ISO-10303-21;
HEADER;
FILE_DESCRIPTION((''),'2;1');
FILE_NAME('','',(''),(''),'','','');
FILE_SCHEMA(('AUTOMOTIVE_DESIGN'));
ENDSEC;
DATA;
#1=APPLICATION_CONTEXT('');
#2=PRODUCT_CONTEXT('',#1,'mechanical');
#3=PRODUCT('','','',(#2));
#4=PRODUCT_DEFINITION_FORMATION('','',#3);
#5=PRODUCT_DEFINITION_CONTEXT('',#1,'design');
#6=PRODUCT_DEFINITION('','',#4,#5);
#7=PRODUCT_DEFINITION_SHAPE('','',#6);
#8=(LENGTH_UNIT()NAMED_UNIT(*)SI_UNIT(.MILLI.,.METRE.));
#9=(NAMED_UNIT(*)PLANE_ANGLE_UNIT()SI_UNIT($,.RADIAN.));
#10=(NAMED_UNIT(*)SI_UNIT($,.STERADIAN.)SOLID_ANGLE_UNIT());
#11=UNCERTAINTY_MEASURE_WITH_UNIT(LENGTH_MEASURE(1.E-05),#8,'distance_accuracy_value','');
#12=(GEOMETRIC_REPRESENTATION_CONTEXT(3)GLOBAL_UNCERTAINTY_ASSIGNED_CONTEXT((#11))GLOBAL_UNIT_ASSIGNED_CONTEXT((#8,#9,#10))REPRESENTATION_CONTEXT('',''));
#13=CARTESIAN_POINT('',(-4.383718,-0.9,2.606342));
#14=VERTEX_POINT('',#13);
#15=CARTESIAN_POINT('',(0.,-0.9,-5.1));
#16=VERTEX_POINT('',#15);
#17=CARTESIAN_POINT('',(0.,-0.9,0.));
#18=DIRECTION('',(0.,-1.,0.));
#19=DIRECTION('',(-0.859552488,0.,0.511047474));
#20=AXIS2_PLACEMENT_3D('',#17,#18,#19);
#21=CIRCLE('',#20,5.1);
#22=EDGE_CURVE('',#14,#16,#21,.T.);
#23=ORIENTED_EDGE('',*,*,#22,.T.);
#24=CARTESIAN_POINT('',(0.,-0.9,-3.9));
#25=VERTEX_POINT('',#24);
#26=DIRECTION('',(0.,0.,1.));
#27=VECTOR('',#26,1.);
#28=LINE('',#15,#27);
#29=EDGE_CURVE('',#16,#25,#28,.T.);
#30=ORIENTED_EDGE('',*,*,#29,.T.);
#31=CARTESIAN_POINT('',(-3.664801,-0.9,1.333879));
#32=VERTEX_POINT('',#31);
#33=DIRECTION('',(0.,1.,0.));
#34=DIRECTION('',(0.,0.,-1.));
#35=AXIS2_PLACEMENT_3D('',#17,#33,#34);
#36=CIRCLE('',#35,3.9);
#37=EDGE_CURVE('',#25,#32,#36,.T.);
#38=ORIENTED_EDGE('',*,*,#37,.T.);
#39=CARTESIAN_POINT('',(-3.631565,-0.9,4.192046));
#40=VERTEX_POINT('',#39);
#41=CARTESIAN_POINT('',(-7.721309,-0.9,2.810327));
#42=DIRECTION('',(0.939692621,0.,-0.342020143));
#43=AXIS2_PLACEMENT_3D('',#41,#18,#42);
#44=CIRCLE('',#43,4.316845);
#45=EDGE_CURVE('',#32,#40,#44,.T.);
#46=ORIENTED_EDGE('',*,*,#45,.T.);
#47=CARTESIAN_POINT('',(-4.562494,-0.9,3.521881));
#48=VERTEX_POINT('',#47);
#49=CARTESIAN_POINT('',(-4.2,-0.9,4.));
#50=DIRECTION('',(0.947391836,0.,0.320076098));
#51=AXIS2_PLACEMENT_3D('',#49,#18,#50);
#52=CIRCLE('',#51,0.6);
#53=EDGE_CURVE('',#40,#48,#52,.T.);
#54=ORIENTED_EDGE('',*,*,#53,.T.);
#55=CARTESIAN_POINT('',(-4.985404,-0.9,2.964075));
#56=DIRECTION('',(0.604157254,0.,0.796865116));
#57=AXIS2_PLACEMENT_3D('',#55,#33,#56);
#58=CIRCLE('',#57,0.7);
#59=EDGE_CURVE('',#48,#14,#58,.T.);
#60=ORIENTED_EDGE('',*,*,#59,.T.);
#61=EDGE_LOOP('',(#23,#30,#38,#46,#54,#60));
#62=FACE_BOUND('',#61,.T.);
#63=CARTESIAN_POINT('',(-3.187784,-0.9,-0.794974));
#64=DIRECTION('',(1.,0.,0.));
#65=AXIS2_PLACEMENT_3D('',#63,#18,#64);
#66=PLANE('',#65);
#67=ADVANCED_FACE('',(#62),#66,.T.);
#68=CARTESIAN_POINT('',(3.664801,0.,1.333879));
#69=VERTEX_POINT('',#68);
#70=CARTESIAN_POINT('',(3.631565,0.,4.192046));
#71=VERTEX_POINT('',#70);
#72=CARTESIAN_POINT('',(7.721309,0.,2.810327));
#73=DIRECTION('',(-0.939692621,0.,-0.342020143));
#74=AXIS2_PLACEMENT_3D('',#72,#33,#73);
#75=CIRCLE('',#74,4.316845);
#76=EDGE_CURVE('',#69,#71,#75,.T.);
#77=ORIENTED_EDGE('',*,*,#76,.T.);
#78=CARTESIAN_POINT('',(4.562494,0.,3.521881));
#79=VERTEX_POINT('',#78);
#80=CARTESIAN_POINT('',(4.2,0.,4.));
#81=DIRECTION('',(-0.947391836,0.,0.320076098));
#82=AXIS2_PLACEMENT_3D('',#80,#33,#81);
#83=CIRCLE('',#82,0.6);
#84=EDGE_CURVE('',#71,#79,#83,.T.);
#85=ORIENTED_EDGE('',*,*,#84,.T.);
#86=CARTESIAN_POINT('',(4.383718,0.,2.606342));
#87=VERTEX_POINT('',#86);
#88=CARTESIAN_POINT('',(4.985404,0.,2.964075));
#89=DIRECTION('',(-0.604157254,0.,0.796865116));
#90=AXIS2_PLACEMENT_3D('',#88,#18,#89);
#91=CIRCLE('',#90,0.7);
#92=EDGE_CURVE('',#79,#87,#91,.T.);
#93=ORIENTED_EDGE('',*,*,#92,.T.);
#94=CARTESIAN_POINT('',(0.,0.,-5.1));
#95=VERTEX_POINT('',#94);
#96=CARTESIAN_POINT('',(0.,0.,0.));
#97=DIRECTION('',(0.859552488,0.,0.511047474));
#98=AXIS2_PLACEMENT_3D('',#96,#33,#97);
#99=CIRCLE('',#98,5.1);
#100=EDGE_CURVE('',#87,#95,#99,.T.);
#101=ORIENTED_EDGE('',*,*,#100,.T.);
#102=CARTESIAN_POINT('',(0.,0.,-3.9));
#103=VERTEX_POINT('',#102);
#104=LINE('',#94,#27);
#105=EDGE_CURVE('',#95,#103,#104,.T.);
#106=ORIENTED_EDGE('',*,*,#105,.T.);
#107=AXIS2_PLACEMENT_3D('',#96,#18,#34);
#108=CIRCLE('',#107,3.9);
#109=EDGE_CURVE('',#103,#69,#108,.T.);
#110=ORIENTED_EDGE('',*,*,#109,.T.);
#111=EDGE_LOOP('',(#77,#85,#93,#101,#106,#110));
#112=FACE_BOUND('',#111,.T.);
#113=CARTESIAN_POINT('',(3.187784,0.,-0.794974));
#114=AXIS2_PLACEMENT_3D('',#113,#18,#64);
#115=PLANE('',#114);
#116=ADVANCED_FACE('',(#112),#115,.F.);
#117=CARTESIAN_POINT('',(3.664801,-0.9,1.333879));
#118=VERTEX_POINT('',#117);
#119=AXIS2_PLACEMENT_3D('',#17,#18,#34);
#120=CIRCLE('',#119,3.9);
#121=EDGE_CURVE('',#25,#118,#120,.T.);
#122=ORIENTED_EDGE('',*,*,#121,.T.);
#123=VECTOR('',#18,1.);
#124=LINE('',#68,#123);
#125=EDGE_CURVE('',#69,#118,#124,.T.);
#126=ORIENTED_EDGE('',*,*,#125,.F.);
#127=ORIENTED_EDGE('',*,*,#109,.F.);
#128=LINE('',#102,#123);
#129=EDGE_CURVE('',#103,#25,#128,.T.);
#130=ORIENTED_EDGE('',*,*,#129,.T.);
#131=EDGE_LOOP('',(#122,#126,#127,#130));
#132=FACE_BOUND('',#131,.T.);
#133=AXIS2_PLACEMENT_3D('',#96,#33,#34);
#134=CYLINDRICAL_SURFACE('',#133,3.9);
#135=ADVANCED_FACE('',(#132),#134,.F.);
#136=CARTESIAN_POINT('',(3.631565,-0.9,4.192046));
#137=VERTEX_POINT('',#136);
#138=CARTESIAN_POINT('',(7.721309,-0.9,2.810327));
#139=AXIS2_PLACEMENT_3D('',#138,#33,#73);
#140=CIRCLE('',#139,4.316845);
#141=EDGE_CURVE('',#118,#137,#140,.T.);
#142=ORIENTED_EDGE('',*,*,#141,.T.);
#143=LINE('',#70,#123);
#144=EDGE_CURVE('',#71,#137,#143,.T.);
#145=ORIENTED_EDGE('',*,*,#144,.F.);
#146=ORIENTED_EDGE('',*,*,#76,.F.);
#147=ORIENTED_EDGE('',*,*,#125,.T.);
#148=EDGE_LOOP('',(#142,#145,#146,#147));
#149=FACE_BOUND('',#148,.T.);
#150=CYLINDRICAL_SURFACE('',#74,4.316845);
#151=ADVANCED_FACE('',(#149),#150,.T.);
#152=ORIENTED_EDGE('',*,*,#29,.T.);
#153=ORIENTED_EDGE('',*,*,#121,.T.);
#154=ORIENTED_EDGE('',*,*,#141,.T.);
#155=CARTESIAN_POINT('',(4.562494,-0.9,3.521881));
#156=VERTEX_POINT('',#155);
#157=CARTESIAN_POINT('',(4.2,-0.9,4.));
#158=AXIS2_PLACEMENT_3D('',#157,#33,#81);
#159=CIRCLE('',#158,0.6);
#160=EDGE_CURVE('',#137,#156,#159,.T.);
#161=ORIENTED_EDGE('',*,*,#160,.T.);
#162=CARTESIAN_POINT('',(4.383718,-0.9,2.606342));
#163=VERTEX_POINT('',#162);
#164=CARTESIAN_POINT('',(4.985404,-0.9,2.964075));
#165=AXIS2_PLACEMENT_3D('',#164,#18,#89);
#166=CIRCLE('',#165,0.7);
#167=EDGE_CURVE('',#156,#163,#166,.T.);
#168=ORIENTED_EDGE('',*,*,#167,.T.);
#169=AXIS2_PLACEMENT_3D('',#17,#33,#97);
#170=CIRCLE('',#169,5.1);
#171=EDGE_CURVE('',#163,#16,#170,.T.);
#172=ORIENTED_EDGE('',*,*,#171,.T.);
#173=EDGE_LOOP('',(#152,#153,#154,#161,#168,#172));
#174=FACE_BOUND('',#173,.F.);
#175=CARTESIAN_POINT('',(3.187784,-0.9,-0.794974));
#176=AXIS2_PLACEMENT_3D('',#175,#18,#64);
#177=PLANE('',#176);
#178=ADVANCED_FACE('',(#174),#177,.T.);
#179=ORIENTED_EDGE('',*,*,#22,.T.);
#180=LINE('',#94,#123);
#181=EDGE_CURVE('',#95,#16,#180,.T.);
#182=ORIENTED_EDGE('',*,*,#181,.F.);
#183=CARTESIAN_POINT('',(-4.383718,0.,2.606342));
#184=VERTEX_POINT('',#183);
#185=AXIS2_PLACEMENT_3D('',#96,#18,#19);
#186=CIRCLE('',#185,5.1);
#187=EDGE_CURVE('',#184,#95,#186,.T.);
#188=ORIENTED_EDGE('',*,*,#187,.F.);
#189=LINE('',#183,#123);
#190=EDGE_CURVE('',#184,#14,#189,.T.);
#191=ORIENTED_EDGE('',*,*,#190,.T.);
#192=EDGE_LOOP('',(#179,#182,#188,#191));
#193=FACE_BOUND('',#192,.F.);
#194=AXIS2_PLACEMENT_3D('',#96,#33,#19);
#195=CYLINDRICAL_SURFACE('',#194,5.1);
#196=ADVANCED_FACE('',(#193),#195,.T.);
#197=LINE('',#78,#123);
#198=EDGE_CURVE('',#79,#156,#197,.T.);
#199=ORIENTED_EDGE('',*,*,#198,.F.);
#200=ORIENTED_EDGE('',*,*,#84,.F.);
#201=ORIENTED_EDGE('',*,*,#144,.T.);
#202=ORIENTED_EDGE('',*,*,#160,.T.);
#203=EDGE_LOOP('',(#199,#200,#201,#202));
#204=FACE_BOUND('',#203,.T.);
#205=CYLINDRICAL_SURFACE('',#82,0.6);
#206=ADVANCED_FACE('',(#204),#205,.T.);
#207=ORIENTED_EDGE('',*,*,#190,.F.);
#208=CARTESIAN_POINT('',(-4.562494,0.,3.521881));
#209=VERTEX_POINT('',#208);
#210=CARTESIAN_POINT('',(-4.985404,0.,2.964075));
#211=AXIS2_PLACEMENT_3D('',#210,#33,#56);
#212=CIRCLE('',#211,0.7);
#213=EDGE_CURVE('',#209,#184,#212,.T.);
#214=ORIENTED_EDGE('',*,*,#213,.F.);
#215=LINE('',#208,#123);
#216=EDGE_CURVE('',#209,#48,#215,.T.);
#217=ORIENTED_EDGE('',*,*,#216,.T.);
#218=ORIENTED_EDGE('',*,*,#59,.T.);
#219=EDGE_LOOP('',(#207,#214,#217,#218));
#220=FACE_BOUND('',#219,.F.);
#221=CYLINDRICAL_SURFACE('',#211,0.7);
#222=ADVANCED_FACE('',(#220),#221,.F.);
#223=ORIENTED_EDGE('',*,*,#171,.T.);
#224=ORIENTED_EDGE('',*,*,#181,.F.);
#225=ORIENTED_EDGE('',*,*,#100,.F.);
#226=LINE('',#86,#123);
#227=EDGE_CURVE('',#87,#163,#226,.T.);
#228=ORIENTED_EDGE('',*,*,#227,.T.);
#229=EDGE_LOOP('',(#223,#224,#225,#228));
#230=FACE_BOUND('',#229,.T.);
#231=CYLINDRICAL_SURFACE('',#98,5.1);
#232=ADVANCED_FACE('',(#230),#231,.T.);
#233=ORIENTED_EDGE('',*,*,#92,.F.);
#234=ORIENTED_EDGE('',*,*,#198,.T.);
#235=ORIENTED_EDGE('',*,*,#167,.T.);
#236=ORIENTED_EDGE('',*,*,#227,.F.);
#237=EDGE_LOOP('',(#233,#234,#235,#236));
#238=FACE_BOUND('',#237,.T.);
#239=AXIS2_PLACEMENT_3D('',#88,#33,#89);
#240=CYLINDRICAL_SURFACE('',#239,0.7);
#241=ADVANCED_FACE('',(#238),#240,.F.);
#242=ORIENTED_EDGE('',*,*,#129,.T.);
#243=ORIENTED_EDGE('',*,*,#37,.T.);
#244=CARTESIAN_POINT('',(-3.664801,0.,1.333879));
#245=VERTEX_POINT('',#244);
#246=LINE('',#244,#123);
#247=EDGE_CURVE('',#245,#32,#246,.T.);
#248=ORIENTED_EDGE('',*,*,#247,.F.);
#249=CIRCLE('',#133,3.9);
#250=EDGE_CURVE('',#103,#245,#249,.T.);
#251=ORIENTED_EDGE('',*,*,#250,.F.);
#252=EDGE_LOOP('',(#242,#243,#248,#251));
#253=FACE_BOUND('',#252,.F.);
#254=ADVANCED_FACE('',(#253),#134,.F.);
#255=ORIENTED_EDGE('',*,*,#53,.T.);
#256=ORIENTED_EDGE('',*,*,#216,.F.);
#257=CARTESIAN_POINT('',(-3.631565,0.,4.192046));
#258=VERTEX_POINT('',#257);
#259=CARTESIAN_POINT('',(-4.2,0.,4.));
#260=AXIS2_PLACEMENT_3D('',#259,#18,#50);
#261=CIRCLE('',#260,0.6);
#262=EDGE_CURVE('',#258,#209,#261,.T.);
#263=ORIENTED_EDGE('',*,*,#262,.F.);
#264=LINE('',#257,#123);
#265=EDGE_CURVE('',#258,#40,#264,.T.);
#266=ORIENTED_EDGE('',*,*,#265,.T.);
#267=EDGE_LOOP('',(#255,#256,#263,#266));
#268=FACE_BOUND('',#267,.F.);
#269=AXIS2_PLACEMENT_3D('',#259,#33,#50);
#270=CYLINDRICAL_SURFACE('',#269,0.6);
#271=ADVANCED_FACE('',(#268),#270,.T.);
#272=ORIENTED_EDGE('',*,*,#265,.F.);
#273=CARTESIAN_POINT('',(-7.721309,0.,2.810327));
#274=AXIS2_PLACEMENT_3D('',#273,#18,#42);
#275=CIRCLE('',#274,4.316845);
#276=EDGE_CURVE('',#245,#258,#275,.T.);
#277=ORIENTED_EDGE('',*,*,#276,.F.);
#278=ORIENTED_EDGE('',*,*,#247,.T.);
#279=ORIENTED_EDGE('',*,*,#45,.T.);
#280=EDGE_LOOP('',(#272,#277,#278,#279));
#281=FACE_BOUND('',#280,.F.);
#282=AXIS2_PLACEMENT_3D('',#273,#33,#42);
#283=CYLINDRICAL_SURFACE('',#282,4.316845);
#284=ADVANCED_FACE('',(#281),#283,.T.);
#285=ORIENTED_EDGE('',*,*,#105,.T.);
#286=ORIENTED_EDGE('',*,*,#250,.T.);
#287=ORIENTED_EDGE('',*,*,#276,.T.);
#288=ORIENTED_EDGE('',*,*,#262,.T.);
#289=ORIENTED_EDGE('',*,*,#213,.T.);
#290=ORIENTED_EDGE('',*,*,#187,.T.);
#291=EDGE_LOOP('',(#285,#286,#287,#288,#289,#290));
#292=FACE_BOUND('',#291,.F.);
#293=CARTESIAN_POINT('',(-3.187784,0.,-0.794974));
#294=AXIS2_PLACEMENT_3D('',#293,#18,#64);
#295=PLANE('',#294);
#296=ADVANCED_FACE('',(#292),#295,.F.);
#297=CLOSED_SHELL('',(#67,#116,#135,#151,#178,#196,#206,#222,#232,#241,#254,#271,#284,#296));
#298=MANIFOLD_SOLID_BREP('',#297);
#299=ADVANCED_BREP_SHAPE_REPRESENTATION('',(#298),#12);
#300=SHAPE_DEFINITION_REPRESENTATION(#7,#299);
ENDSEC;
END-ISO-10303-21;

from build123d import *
from build123d import SkipClean  # not in build123d's __all__

# Parameters (mm, degrees)
F1_DEPTH = 0.9


with BuildPart() as f1:
    # F0 (on Front) → F1 (new body)
    with BuildSketch(Plane.XZ):
        with BuildLine():
            ThreePointArc((-3.6648012211, 1.333878559), (-3.4047554287, 2.7601313999), (-3.6315648982, 4.1920456588))
            ThreePointArc((-3.6315648982, 4.1920456588), (-4.5505468427, 4.4869465177), (-4.562494352, 3.5218809304))
            ThreePointArc((-4.562494352, 3.5218809304), (-4.2983800559, 3.0982301484), (-4.3837176879, 2.6063421173))
            ThreePointArc((-4.3837176879, 2.6063421173), (-4.4329642903, -2.5216715886), (0, -5.1))
            Line((0, -5.1), (0, -3.9))
            ThreePointArc((0, -3.9), (-3.1946929727, -2.2369481018), (-3.6648012211, 1.333878559))
        make_face()
    extrude(amount=F1_DEPTH)

    # F2: F1 across plane


with BuildPart() as f1_1:
    add(f1.part, clean=False)
    with SkipClean():  # cleaning this boolean's faces spoils the solid; the shape is the same uncleaned
        add(f1.part.mirror(Plane.YZ), clean=False)


solid = f1_1.part
